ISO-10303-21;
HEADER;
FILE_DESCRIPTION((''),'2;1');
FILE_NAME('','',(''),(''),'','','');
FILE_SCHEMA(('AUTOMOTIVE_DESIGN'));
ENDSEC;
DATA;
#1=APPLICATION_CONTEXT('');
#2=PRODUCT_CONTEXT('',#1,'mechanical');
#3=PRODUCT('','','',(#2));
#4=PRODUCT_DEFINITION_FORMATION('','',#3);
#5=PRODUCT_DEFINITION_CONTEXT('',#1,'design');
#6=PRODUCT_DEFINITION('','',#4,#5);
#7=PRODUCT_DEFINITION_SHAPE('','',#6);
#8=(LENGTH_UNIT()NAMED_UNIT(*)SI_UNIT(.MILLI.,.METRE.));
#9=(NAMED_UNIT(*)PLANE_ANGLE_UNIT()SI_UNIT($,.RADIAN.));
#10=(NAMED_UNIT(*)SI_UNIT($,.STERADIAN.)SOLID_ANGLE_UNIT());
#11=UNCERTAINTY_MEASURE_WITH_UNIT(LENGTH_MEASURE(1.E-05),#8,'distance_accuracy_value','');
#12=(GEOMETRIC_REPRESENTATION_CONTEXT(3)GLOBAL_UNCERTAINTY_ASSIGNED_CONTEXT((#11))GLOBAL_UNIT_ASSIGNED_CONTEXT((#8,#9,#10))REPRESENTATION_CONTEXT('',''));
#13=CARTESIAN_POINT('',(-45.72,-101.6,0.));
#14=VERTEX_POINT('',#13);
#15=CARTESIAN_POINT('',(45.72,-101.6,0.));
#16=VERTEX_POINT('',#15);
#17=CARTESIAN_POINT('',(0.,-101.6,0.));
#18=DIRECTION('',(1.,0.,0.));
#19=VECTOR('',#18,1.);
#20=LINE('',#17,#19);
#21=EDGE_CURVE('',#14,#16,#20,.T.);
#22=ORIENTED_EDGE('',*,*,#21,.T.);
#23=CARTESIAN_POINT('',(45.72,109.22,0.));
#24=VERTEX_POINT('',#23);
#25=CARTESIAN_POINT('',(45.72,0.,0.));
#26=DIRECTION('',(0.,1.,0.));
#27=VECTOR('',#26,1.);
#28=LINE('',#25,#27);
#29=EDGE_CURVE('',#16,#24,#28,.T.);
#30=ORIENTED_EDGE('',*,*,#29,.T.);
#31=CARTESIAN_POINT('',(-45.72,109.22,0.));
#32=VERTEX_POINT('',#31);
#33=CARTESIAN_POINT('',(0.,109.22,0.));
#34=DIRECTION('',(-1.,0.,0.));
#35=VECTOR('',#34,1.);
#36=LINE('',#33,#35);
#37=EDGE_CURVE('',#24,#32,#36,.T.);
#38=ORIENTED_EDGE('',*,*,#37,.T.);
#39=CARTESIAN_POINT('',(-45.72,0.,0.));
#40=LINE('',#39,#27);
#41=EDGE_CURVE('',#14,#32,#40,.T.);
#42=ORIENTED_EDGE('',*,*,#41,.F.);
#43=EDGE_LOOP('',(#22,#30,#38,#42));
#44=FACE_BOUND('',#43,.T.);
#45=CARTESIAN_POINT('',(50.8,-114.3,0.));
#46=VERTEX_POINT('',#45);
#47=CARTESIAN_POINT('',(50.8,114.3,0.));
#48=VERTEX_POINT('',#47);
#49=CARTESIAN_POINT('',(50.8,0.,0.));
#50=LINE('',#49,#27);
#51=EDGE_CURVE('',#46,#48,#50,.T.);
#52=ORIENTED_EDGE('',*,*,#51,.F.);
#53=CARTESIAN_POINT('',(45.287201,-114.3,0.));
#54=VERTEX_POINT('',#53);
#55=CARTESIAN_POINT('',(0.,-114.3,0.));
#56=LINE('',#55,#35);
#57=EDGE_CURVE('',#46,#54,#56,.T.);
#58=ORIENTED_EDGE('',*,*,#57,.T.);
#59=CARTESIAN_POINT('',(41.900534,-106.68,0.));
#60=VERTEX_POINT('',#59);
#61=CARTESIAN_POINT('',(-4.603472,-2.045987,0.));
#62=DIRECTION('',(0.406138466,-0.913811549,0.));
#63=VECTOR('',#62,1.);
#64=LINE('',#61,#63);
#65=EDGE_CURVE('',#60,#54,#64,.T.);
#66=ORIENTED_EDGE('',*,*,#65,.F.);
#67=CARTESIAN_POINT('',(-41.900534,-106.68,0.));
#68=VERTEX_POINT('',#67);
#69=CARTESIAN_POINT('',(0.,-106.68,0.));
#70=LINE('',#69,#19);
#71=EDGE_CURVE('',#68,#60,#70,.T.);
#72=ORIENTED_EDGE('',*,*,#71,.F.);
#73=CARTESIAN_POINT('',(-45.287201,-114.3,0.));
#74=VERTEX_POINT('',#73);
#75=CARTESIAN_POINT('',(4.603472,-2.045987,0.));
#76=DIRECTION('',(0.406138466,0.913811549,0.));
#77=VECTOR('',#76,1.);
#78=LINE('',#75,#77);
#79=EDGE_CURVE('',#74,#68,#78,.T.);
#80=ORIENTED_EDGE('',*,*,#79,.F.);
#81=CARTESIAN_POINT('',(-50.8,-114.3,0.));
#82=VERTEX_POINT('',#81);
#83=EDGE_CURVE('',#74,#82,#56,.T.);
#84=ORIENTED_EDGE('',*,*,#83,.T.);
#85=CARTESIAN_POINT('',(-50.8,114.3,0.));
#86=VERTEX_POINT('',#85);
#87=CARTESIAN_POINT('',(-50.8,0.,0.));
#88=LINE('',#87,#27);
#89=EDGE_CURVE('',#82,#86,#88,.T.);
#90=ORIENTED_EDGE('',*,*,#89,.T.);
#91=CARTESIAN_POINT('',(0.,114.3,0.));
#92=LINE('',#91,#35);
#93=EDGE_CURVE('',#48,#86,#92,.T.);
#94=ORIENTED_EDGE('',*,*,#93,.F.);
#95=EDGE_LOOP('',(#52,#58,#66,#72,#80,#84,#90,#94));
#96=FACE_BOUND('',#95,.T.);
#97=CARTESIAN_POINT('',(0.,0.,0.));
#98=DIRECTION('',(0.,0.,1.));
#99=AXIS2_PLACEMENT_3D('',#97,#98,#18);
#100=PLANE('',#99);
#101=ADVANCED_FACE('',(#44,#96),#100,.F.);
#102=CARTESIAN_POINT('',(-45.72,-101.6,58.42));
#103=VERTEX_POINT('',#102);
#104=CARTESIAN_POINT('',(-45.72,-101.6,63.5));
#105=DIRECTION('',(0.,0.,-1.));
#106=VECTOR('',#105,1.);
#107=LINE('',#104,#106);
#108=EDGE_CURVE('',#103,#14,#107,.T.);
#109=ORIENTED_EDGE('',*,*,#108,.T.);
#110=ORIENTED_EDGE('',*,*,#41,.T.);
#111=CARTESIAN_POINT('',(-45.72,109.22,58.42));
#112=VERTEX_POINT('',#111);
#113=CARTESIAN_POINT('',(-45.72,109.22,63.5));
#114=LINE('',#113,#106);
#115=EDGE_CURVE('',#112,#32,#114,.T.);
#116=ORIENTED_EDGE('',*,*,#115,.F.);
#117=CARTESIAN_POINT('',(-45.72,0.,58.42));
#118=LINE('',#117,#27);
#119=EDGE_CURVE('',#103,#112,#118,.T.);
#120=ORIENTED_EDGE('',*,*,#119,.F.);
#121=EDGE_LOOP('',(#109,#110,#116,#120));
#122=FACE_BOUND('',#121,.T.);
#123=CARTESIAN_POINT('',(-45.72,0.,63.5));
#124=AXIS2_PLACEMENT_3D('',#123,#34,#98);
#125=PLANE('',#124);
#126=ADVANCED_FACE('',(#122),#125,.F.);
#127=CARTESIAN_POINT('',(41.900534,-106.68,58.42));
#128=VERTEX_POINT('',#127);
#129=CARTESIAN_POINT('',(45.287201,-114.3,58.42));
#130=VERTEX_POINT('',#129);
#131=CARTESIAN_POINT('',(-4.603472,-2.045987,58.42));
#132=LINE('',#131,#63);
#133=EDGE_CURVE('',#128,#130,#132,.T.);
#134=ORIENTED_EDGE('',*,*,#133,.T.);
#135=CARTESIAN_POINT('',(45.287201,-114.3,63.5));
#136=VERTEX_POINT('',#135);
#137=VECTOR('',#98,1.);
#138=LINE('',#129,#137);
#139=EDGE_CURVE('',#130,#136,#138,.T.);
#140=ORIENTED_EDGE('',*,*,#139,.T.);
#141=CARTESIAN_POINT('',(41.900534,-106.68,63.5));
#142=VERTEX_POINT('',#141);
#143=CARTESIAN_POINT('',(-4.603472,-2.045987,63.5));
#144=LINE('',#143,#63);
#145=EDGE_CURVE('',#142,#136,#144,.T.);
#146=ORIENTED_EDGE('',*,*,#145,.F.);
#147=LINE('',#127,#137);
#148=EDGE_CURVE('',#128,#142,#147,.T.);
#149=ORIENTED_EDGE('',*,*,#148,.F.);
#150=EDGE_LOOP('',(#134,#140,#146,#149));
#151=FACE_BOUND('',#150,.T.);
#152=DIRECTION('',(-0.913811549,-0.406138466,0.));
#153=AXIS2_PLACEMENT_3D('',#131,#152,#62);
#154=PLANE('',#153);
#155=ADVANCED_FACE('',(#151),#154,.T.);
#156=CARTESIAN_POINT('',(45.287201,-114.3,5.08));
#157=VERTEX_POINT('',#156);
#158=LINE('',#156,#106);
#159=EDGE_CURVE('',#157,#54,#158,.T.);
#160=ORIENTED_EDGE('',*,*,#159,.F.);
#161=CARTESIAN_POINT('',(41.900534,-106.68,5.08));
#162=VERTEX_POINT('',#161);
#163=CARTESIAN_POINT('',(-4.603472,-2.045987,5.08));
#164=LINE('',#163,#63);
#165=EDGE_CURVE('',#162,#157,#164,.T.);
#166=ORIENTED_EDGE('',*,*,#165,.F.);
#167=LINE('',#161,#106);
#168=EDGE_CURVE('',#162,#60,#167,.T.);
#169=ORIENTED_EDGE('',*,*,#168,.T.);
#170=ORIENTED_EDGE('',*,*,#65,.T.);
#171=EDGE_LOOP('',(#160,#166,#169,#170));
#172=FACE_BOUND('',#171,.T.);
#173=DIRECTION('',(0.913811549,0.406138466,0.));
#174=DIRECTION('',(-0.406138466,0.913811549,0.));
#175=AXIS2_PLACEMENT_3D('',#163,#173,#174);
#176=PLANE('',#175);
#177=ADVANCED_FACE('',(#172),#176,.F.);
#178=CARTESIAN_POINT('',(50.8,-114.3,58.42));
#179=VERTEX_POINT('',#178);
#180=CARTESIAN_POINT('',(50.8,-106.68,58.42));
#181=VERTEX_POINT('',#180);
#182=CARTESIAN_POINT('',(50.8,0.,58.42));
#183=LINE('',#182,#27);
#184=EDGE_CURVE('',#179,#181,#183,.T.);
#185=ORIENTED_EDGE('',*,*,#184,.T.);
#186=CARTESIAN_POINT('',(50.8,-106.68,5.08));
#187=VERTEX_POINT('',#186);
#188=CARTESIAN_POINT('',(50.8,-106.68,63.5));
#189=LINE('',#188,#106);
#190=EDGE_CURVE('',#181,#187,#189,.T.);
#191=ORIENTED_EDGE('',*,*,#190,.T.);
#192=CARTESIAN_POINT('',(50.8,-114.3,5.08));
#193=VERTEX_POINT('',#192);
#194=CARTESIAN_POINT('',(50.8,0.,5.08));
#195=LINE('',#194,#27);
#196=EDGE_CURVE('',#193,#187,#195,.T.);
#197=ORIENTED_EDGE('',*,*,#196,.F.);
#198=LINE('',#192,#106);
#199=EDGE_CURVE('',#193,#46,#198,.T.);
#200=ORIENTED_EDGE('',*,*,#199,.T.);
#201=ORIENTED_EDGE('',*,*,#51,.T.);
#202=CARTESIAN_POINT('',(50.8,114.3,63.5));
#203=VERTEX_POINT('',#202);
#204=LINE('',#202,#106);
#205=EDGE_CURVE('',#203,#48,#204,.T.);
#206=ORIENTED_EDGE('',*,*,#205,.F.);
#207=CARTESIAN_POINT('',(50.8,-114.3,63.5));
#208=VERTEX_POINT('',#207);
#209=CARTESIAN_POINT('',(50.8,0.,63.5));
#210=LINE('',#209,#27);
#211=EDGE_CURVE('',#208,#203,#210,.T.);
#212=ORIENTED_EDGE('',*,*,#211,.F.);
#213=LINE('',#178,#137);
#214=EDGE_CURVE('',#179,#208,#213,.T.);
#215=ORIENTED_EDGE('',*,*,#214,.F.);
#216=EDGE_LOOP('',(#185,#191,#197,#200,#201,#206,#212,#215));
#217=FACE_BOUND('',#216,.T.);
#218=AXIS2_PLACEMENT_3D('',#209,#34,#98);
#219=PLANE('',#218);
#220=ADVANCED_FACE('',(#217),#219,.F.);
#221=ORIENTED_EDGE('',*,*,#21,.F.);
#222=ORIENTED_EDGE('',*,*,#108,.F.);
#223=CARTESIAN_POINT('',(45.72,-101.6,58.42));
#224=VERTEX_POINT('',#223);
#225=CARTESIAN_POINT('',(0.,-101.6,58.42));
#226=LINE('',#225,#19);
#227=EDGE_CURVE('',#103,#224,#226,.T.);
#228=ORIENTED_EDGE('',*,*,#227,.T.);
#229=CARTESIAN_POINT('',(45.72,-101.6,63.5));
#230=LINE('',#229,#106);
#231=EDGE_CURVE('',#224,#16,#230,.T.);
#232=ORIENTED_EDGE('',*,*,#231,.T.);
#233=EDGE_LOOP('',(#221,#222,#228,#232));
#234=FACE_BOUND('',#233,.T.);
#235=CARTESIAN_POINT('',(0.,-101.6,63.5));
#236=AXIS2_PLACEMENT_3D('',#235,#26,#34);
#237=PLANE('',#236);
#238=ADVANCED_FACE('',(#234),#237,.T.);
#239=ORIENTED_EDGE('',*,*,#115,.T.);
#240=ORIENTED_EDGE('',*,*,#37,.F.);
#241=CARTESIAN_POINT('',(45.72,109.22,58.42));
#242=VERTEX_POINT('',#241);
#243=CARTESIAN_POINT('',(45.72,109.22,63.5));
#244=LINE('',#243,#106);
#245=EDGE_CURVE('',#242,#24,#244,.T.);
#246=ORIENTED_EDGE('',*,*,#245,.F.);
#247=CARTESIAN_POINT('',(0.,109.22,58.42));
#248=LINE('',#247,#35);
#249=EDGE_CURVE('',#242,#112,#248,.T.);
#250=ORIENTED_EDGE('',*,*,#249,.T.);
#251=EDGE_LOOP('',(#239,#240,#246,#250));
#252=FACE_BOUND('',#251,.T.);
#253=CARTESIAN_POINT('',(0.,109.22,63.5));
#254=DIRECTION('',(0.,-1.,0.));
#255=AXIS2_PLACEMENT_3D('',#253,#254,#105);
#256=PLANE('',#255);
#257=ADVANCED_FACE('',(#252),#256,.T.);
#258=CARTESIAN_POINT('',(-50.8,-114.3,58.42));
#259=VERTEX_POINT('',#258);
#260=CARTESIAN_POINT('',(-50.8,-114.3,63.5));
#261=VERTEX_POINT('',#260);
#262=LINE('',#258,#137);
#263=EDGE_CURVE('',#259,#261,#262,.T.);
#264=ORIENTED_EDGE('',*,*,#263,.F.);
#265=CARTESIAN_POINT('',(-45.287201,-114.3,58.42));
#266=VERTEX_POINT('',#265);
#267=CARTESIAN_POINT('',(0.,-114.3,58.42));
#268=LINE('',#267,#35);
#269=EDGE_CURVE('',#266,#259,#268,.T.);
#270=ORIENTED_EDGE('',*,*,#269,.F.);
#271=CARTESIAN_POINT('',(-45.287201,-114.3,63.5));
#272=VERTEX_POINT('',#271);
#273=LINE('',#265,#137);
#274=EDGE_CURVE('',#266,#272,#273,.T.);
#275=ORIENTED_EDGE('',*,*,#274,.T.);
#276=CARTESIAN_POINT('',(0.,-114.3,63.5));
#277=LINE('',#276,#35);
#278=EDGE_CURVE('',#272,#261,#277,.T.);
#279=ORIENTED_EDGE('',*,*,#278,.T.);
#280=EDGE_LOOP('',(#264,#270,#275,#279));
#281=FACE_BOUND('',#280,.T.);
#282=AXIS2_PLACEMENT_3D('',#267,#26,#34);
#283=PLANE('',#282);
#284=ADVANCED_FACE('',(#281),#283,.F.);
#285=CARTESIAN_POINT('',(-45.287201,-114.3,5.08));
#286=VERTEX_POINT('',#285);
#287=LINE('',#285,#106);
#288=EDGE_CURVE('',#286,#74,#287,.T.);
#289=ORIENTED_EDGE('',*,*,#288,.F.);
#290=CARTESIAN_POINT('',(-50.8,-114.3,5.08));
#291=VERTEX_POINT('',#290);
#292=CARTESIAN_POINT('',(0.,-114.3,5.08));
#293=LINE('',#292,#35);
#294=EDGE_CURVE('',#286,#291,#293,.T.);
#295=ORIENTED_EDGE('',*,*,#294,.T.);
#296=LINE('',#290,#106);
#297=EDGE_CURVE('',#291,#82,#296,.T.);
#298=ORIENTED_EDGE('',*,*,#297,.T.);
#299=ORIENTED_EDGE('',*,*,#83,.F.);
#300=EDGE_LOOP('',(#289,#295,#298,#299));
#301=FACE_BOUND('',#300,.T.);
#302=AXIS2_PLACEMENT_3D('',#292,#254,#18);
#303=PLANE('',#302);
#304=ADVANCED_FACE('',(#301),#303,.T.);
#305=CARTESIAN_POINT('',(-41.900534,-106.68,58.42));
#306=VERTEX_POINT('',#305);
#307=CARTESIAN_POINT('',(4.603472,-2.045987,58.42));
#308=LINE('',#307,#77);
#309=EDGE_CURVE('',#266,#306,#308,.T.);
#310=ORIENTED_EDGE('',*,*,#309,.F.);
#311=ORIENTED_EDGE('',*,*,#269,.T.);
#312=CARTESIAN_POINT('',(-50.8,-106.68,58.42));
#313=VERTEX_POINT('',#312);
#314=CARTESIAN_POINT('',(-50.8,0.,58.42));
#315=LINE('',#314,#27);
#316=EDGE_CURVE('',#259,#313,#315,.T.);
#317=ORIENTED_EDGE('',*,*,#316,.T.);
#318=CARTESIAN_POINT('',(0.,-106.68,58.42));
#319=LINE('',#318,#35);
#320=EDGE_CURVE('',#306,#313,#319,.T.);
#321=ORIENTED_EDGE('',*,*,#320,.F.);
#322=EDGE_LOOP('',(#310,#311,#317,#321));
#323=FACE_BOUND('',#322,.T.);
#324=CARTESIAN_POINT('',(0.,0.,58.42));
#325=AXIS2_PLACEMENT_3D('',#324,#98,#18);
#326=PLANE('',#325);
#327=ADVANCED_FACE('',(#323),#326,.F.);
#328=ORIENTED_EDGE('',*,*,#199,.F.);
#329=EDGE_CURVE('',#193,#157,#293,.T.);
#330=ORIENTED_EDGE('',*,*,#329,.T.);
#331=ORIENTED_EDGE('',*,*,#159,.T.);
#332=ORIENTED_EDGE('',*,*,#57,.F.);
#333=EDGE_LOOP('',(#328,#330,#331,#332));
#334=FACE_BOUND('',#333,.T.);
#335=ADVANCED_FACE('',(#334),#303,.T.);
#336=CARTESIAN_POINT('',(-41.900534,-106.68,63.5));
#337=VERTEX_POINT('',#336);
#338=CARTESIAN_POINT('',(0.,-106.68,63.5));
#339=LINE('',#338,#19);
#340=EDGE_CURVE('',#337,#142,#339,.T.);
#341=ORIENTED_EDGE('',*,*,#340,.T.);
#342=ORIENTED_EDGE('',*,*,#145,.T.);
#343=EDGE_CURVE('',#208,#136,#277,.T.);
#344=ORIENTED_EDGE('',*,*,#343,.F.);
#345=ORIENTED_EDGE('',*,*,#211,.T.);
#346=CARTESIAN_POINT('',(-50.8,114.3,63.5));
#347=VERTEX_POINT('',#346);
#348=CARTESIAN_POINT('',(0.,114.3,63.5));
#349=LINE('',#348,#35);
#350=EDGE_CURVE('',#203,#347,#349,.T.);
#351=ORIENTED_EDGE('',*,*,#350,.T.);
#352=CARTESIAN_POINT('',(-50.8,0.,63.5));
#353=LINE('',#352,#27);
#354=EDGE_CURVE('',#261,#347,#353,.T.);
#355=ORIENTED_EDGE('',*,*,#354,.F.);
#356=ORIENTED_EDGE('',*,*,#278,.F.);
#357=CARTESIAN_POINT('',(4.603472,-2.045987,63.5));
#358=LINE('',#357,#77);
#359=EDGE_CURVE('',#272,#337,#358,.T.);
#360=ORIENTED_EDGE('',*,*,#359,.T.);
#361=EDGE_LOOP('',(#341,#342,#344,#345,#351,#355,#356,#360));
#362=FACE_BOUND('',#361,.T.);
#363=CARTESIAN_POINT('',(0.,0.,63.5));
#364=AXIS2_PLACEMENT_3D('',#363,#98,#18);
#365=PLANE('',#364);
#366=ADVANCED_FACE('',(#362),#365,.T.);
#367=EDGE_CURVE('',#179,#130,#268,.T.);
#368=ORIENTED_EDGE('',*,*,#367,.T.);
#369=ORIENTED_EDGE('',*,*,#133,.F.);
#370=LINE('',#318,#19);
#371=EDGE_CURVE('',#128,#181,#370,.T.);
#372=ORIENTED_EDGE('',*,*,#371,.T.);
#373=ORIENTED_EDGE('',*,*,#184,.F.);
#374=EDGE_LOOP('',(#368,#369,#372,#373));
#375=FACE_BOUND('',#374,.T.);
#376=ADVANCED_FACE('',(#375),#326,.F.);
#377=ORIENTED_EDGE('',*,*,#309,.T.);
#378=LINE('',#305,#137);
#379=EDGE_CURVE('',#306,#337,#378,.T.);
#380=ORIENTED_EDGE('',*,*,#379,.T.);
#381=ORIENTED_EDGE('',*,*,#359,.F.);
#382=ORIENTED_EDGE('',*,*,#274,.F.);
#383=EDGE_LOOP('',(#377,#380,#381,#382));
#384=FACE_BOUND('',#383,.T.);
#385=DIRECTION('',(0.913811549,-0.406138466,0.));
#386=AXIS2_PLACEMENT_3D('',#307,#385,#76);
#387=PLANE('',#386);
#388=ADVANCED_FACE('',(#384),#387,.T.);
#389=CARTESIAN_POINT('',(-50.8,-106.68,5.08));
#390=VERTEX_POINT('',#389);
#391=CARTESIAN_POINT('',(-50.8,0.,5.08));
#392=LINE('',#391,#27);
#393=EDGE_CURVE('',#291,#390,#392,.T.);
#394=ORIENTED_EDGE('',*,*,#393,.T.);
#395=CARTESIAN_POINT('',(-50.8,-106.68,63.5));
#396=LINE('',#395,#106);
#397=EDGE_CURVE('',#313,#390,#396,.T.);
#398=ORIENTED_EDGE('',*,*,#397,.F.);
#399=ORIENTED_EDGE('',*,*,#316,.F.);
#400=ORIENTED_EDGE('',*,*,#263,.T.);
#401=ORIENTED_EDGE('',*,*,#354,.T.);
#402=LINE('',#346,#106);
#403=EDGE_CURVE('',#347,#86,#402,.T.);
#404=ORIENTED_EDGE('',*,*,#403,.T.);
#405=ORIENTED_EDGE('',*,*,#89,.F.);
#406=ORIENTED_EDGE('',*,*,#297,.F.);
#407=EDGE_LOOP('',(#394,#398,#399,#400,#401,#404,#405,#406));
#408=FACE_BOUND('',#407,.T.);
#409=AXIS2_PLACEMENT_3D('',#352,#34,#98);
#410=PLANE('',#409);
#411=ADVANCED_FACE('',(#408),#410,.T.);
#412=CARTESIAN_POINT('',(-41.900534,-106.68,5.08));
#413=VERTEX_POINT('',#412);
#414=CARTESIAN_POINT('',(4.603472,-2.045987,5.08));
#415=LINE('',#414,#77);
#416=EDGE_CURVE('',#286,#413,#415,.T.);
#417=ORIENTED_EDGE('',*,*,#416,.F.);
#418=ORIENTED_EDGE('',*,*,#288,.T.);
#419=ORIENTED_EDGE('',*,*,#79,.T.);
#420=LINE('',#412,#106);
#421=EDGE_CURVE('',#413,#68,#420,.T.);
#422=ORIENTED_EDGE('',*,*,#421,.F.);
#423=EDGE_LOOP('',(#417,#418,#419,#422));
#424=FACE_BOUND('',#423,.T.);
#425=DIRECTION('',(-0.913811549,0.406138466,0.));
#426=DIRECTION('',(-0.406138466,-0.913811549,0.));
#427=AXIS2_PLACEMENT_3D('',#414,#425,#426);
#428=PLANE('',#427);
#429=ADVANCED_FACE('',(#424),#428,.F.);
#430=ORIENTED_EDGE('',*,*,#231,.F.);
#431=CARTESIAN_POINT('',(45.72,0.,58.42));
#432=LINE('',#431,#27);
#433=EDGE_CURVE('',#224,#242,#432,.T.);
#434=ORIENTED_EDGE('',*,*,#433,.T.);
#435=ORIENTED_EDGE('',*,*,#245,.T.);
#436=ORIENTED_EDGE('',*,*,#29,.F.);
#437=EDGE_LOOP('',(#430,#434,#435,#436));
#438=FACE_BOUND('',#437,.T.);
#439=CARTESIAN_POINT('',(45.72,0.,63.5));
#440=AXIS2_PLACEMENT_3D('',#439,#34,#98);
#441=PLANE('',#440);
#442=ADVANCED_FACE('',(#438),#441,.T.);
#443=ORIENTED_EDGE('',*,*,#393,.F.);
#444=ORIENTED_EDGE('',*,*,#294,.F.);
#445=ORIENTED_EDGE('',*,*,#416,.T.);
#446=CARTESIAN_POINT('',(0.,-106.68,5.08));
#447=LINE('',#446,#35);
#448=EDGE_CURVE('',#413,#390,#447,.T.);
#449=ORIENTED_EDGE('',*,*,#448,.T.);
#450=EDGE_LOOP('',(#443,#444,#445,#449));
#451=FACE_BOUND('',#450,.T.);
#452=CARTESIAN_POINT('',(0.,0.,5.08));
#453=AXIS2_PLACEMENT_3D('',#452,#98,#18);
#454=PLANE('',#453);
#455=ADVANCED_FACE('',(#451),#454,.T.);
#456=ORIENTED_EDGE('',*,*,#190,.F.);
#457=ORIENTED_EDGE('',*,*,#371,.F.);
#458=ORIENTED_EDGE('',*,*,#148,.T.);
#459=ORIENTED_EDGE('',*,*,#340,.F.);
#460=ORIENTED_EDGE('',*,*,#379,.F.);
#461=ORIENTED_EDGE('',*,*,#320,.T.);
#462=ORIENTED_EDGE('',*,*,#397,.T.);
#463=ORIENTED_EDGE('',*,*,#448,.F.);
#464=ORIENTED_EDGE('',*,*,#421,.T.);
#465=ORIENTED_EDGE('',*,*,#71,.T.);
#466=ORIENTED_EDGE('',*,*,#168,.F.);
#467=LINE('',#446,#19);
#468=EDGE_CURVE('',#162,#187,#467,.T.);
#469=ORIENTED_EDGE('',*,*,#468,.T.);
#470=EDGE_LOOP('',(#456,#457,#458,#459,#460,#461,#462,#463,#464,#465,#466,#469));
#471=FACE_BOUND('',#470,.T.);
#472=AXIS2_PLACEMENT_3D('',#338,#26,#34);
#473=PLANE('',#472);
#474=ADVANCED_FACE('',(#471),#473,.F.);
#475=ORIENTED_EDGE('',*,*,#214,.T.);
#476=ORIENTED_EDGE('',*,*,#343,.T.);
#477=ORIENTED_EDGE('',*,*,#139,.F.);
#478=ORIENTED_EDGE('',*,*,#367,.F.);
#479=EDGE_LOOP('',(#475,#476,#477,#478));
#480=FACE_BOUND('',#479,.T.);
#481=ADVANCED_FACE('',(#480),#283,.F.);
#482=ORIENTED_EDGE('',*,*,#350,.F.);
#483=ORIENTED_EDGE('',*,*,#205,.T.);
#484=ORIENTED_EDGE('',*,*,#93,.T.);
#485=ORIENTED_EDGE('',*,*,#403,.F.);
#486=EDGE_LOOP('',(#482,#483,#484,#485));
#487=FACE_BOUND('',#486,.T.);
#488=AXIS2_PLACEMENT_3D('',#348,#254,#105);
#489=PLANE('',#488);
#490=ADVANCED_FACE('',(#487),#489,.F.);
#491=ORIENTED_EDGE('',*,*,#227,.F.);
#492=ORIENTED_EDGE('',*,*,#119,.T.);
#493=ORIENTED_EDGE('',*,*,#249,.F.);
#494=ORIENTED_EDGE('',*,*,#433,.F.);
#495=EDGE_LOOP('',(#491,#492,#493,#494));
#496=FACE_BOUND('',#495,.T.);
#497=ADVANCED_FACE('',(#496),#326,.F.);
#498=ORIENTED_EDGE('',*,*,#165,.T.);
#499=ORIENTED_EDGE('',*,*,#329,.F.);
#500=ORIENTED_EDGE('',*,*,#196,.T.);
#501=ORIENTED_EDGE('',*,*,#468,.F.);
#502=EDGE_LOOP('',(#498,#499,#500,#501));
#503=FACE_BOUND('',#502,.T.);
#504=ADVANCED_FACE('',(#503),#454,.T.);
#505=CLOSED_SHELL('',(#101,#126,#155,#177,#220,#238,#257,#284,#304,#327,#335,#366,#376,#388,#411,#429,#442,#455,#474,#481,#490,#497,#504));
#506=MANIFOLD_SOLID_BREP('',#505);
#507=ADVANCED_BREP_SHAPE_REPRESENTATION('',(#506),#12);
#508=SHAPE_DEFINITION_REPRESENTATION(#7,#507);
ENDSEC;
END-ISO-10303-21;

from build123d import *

# Parameters (mm, degrees)
BOSS_EXTRUDE1_DEPTH = 63.5
BOSS_EXTRUDE2_DEPTH = 5.08
BOSS_EXTRUDE3_START = 63.5
BOSS_EXTRUDE3_DEPTH = 5.08
SHELL1_OUTLINE_W    = 91.44
SHELL1_OUTLINE_H    = 210.82
SHELL1_DEPTH        = 58.42


# Read off the part's stored shape, not the designer's step: Shell1
with BuildPart() as part:
    # Sketch1 → Boss-Extrude1 (new body)
    with BuildSketch(Plane.XY):
        Polygon((-50.8, -106.68), (-41.900534076, -106.68), (41.900534076, -106.68), (50.8, -106.68), (50.8, 114.3), (-50.8, 114.3), align=None)
    extrude(amount=BOSS_EXTRUDE1_DEPTH)

    # Sketch1<4> → Boss-Extrude2 (add)
    with BuildSketch(Plane.XY):
        Polygon((50.8, -106.68), (41.900534076, -106.68), (45.287200742, -114.3), (50.8, -114.3), align=None)
        Polygon((-50.8, -114.3), (-45.287200742, -114.3), (-41.900534076, -106.68), (-50.8, -106.68), align=None)
    extrude(amount=BOSS_EXTRUDE2_DEPTH)

    # Sketch1<5> → Boss-Extrude3 (add)
    with BuildSketch(Plane.XY.offset(BOSS_EXTRUDE3_START)):
        Polygon((-50.8, -114.3), (-45.287200742, -114.3), (-41.900534076, -106.68), (-50.8, -106.68), align=None)
        Polygon((50.8, -106.68), (41.900534076, -106.68), (45.287200742, -114.3), (50.8, -114.3), align=None)
    extrude(amount=-BOSS_EXTRUDE3_DEPTH)

    # Shell1 outline → Shell1 (cut)
    with BuildSketch(Plane.XY):
        with Locations((0, 3.81)):
            Rectangle(SHELL1_OUTLINE_W, SHELL1_OUTLINE_H)
    extrude(amount=SHELL1_DEPTH, mode=Mode.SUBTRACT)


solid = part.part
